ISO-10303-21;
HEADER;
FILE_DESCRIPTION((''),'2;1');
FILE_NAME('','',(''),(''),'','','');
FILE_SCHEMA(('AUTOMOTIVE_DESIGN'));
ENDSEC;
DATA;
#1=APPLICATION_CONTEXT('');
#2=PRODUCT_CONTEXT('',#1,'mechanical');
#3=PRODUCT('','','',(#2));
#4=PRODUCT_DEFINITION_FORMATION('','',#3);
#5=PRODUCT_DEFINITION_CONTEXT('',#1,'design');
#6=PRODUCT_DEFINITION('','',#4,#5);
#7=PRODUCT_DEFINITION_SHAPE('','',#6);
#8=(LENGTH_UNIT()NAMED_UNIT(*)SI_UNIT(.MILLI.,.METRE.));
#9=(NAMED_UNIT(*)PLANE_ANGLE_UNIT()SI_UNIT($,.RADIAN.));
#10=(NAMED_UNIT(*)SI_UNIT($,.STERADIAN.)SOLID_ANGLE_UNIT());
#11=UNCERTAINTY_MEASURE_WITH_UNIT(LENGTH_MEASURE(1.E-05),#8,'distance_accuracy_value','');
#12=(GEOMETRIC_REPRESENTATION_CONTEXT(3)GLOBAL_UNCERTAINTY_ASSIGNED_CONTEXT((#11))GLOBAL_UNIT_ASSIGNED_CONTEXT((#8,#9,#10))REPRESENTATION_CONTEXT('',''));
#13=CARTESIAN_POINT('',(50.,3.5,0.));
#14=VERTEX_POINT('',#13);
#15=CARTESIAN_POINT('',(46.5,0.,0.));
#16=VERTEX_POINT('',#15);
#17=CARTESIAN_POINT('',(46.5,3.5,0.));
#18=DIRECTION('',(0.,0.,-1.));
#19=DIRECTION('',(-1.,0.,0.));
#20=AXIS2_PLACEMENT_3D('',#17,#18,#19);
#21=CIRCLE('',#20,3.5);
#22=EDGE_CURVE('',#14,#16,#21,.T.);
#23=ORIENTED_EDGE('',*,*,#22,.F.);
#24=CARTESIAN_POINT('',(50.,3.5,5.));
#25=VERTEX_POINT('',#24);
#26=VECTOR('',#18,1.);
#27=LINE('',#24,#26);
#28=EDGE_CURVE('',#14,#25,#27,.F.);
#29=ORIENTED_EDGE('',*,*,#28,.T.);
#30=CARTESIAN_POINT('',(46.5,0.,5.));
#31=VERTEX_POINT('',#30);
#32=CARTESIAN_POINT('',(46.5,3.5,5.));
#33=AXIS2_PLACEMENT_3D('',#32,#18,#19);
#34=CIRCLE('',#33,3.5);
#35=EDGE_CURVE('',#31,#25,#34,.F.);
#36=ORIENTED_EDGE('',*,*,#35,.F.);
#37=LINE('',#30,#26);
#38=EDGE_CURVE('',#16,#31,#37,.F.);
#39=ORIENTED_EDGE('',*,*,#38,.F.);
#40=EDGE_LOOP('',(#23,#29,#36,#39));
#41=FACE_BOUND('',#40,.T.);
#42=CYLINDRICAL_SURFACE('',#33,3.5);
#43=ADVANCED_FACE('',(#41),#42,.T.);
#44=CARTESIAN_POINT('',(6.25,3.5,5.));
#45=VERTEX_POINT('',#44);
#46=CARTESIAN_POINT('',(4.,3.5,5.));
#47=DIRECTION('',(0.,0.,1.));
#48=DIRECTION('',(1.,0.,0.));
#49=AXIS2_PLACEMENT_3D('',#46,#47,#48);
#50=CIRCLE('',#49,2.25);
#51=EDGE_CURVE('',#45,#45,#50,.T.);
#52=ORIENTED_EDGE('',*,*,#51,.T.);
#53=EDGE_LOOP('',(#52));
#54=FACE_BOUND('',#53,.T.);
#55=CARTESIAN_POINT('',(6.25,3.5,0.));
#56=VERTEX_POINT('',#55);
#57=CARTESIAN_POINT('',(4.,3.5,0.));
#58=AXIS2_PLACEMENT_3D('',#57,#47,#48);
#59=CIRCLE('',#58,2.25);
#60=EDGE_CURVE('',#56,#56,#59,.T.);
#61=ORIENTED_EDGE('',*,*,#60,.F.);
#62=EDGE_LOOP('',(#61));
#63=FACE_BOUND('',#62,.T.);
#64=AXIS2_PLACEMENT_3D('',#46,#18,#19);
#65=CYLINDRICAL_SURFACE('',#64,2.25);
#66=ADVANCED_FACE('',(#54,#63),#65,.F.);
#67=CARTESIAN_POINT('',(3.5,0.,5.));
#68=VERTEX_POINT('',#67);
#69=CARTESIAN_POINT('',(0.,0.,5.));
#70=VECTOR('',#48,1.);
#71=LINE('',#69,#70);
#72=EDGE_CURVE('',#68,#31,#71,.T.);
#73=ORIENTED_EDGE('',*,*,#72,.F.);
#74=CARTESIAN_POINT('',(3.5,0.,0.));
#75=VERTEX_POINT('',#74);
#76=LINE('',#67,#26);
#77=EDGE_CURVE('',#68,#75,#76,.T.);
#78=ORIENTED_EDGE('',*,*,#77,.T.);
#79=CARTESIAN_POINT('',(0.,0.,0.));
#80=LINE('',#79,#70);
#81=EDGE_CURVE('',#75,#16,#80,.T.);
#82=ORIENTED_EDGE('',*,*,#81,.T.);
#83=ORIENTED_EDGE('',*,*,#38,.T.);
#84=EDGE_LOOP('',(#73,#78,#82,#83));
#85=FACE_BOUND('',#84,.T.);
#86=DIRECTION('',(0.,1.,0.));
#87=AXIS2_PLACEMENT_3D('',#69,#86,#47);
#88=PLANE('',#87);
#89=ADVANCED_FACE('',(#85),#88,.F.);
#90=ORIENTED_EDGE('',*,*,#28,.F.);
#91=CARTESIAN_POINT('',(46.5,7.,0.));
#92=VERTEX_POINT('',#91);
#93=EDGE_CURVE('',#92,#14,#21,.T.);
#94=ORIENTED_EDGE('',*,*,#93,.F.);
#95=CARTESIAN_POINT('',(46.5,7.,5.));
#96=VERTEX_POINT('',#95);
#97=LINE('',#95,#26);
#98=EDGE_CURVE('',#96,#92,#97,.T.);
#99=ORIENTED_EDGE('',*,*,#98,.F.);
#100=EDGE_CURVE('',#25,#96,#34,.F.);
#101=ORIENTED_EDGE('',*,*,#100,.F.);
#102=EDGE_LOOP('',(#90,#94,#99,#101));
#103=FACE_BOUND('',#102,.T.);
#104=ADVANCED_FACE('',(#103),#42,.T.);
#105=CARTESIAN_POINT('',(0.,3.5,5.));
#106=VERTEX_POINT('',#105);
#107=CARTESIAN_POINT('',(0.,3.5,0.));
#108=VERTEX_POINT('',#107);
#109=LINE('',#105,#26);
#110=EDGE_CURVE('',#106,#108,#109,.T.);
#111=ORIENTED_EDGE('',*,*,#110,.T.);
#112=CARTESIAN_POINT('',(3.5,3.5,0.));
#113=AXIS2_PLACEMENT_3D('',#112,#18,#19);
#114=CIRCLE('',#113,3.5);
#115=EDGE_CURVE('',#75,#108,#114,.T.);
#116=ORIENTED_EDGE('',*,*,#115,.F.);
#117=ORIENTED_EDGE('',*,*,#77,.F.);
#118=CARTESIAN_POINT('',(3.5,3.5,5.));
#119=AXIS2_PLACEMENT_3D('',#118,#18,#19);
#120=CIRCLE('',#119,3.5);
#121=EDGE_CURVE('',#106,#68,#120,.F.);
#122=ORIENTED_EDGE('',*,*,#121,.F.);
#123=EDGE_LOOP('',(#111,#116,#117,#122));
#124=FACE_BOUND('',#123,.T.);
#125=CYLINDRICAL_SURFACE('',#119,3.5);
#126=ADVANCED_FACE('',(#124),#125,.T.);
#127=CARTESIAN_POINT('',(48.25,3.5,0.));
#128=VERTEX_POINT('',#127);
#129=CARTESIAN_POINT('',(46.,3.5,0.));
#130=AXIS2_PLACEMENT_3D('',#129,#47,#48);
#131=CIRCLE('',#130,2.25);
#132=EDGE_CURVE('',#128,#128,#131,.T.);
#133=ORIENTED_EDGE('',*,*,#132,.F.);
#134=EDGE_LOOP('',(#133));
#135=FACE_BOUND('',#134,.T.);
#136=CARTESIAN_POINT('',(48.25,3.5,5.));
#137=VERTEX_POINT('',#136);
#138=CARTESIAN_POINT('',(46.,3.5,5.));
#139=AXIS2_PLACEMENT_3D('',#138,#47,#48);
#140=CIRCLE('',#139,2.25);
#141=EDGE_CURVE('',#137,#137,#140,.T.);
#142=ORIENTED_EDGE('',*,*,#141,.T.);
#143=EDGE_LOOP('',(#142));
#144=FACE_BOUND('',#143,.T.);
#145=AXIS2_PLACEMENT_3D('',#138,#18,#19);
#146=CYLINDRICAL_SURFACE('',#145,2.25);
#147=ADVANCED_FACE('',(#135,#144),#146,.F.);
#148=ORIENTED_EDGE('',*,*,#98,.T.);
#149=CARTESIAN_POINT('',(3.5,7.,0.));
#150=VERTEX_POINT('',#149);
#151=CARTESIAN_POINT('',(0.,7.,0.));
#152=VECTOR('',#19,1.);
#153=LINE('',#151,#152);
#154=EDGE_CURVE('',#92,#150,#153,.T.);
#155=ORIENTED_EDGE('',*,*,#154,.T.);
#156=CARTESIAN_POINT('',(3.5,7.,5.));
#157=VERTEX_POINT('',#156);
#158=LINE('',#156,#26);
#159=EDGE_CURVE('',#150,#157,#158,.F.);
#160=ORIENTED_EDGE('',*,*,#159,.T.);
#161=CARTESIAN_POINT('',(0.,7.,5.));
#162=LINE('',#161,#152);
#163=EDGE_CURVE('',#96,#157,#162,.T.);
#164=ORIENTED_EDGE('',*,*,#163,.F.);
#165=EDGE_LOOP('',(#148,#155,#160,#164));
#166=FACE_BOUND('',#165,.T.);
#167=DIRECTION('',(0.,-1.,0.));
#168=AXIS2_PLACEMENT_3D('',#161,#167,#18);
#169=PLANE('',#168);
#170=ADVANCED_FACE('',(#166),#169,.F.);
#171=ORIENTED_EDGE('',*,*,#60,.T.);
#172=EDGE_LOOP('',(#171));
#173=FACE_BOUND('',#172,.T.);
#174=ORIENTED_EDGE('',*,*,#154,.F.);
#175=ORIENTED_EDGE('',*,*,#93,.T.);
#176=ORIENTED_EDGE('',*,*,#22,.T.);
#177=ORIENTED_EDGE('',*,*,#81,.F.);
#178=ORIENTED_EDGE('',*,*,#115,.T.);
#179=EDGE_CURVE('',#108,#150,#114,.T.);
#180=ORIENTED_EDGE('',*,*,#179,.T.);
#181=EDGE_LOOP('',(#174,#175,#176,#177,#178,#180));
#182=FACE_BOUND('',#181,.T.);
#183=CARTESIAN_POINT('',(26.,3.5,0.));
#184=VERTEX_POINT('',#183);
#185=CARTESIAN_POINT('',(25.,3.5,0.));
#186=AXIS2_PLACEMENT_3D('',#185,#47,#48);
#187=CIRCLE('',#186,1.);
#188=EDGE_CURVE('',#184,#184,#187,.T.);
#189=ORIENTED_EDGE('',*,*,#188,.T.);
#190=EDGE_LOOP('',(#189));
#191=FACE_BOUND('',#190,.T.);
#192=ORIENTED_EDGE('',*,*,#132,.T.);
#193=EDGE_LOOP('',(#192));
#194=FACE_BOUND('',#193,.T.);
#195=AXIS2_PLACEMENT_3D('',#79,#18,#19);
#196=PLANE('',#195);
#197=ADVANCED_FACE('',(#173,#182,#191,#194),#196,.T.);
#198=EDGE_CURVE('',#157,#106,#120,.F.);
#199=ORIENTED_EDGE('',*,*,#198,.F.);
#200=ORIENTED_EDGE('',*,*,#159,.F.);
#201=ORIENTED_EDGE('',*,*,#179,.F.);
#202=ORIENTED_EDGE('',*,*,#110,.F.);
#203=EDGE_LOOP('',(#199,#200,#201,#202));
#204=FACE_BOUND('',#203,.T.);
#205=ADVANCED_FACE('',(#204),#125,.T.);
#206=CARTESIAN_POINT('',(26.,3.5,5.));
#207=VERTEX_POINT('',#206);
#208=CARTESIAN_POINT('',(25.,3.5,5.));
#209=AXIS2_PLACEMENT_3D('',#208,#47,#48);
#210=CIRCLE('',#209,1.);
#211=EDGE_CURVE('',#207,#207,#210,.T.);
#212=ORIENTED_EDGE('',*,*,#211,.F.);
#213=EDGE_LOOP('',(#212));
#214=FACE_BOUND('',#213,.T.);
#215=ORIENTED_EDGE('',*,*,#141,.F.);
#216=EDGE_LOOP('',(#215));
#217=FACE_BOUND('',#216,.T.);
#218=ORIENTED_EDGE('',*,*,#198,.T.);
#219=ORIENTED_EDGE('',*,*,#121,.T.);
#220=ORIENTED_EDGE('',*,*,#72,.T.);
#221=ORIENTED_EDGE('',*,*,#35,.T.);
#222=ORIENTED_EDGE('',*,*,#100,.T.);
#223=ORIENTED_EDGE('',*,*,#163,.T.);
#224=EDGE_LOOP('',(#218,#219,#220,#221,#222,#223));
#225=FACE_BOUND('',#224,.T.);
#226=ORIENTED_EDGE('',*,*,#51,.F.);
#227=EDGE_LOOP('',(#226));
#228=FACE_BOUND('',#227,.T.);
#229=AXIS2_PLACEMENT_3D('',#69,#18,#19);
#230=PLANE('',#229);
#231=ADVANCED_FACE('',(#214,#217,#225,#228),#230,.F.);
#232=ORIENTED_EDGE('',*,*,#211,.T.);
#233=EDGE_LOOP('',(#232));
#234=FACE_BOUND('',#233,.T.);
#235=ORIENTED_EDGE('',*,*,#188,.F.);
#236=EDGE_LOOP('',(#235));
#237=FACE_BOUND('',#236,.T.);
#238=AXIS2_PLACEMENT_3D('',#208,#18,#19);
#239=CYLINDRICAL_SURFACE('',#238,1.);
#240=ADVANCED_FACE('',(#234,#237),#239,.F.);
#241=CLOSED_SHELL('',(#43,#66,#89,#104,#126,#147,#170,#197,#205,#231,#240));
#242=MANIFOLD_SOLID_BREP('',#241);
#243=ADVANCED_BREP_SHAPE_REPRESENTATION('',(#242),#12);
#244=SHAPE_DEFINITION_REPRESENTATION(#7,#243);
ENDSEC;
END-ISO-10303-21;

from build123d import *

# Parameters (mm, degrees)
ESBO_O1_W                = 50
ESBO_O1_H                = 7
ESBO_O1_R                = 1
ESBO_O1_R_2              = 2.25
RESSALTO_EXTRUS_O1_DEPTH = 5
FILETE1_R                = 3.5


with BuildPart() as part:
    # Esboço1 → Ressalto-extrusão1 (new body)
    with BuildSketch(Plane.XY):
        with Locations((25, 3.5)):
            Rectangle(ESBO_O1_W, ESBO_O1_H)
        with Locations((25, 3.5)):
            Circle(ESBO_O1_R, mode=Mode.SUBTRACT)
        with Locations((4, 3.5)):
            Circle(ESBO_O1_R_2, mode=Mode.SUBTRACT)
        with Locations((46, 3.5)):
            Circle(ESBO_O1_R_2, mode=Mode.SUBTRACT)
    extrude(amount=RESSALTO_EXTRUS_O1_DEPTH)

    # Filete1
    filete1_edges = [part.edges().sort_by_distance(p)[0] for p in [
        (50, 0, 2.5),
        (50, 7, 2.5),
        (0, 0, 2.5),
        (0, 7, 2.5),
    ]]
    fillet(filete1_edges, radius=FILETE1_R - 0.0001)  # a hair under: the kernel refuses the full size


solid = part.part
